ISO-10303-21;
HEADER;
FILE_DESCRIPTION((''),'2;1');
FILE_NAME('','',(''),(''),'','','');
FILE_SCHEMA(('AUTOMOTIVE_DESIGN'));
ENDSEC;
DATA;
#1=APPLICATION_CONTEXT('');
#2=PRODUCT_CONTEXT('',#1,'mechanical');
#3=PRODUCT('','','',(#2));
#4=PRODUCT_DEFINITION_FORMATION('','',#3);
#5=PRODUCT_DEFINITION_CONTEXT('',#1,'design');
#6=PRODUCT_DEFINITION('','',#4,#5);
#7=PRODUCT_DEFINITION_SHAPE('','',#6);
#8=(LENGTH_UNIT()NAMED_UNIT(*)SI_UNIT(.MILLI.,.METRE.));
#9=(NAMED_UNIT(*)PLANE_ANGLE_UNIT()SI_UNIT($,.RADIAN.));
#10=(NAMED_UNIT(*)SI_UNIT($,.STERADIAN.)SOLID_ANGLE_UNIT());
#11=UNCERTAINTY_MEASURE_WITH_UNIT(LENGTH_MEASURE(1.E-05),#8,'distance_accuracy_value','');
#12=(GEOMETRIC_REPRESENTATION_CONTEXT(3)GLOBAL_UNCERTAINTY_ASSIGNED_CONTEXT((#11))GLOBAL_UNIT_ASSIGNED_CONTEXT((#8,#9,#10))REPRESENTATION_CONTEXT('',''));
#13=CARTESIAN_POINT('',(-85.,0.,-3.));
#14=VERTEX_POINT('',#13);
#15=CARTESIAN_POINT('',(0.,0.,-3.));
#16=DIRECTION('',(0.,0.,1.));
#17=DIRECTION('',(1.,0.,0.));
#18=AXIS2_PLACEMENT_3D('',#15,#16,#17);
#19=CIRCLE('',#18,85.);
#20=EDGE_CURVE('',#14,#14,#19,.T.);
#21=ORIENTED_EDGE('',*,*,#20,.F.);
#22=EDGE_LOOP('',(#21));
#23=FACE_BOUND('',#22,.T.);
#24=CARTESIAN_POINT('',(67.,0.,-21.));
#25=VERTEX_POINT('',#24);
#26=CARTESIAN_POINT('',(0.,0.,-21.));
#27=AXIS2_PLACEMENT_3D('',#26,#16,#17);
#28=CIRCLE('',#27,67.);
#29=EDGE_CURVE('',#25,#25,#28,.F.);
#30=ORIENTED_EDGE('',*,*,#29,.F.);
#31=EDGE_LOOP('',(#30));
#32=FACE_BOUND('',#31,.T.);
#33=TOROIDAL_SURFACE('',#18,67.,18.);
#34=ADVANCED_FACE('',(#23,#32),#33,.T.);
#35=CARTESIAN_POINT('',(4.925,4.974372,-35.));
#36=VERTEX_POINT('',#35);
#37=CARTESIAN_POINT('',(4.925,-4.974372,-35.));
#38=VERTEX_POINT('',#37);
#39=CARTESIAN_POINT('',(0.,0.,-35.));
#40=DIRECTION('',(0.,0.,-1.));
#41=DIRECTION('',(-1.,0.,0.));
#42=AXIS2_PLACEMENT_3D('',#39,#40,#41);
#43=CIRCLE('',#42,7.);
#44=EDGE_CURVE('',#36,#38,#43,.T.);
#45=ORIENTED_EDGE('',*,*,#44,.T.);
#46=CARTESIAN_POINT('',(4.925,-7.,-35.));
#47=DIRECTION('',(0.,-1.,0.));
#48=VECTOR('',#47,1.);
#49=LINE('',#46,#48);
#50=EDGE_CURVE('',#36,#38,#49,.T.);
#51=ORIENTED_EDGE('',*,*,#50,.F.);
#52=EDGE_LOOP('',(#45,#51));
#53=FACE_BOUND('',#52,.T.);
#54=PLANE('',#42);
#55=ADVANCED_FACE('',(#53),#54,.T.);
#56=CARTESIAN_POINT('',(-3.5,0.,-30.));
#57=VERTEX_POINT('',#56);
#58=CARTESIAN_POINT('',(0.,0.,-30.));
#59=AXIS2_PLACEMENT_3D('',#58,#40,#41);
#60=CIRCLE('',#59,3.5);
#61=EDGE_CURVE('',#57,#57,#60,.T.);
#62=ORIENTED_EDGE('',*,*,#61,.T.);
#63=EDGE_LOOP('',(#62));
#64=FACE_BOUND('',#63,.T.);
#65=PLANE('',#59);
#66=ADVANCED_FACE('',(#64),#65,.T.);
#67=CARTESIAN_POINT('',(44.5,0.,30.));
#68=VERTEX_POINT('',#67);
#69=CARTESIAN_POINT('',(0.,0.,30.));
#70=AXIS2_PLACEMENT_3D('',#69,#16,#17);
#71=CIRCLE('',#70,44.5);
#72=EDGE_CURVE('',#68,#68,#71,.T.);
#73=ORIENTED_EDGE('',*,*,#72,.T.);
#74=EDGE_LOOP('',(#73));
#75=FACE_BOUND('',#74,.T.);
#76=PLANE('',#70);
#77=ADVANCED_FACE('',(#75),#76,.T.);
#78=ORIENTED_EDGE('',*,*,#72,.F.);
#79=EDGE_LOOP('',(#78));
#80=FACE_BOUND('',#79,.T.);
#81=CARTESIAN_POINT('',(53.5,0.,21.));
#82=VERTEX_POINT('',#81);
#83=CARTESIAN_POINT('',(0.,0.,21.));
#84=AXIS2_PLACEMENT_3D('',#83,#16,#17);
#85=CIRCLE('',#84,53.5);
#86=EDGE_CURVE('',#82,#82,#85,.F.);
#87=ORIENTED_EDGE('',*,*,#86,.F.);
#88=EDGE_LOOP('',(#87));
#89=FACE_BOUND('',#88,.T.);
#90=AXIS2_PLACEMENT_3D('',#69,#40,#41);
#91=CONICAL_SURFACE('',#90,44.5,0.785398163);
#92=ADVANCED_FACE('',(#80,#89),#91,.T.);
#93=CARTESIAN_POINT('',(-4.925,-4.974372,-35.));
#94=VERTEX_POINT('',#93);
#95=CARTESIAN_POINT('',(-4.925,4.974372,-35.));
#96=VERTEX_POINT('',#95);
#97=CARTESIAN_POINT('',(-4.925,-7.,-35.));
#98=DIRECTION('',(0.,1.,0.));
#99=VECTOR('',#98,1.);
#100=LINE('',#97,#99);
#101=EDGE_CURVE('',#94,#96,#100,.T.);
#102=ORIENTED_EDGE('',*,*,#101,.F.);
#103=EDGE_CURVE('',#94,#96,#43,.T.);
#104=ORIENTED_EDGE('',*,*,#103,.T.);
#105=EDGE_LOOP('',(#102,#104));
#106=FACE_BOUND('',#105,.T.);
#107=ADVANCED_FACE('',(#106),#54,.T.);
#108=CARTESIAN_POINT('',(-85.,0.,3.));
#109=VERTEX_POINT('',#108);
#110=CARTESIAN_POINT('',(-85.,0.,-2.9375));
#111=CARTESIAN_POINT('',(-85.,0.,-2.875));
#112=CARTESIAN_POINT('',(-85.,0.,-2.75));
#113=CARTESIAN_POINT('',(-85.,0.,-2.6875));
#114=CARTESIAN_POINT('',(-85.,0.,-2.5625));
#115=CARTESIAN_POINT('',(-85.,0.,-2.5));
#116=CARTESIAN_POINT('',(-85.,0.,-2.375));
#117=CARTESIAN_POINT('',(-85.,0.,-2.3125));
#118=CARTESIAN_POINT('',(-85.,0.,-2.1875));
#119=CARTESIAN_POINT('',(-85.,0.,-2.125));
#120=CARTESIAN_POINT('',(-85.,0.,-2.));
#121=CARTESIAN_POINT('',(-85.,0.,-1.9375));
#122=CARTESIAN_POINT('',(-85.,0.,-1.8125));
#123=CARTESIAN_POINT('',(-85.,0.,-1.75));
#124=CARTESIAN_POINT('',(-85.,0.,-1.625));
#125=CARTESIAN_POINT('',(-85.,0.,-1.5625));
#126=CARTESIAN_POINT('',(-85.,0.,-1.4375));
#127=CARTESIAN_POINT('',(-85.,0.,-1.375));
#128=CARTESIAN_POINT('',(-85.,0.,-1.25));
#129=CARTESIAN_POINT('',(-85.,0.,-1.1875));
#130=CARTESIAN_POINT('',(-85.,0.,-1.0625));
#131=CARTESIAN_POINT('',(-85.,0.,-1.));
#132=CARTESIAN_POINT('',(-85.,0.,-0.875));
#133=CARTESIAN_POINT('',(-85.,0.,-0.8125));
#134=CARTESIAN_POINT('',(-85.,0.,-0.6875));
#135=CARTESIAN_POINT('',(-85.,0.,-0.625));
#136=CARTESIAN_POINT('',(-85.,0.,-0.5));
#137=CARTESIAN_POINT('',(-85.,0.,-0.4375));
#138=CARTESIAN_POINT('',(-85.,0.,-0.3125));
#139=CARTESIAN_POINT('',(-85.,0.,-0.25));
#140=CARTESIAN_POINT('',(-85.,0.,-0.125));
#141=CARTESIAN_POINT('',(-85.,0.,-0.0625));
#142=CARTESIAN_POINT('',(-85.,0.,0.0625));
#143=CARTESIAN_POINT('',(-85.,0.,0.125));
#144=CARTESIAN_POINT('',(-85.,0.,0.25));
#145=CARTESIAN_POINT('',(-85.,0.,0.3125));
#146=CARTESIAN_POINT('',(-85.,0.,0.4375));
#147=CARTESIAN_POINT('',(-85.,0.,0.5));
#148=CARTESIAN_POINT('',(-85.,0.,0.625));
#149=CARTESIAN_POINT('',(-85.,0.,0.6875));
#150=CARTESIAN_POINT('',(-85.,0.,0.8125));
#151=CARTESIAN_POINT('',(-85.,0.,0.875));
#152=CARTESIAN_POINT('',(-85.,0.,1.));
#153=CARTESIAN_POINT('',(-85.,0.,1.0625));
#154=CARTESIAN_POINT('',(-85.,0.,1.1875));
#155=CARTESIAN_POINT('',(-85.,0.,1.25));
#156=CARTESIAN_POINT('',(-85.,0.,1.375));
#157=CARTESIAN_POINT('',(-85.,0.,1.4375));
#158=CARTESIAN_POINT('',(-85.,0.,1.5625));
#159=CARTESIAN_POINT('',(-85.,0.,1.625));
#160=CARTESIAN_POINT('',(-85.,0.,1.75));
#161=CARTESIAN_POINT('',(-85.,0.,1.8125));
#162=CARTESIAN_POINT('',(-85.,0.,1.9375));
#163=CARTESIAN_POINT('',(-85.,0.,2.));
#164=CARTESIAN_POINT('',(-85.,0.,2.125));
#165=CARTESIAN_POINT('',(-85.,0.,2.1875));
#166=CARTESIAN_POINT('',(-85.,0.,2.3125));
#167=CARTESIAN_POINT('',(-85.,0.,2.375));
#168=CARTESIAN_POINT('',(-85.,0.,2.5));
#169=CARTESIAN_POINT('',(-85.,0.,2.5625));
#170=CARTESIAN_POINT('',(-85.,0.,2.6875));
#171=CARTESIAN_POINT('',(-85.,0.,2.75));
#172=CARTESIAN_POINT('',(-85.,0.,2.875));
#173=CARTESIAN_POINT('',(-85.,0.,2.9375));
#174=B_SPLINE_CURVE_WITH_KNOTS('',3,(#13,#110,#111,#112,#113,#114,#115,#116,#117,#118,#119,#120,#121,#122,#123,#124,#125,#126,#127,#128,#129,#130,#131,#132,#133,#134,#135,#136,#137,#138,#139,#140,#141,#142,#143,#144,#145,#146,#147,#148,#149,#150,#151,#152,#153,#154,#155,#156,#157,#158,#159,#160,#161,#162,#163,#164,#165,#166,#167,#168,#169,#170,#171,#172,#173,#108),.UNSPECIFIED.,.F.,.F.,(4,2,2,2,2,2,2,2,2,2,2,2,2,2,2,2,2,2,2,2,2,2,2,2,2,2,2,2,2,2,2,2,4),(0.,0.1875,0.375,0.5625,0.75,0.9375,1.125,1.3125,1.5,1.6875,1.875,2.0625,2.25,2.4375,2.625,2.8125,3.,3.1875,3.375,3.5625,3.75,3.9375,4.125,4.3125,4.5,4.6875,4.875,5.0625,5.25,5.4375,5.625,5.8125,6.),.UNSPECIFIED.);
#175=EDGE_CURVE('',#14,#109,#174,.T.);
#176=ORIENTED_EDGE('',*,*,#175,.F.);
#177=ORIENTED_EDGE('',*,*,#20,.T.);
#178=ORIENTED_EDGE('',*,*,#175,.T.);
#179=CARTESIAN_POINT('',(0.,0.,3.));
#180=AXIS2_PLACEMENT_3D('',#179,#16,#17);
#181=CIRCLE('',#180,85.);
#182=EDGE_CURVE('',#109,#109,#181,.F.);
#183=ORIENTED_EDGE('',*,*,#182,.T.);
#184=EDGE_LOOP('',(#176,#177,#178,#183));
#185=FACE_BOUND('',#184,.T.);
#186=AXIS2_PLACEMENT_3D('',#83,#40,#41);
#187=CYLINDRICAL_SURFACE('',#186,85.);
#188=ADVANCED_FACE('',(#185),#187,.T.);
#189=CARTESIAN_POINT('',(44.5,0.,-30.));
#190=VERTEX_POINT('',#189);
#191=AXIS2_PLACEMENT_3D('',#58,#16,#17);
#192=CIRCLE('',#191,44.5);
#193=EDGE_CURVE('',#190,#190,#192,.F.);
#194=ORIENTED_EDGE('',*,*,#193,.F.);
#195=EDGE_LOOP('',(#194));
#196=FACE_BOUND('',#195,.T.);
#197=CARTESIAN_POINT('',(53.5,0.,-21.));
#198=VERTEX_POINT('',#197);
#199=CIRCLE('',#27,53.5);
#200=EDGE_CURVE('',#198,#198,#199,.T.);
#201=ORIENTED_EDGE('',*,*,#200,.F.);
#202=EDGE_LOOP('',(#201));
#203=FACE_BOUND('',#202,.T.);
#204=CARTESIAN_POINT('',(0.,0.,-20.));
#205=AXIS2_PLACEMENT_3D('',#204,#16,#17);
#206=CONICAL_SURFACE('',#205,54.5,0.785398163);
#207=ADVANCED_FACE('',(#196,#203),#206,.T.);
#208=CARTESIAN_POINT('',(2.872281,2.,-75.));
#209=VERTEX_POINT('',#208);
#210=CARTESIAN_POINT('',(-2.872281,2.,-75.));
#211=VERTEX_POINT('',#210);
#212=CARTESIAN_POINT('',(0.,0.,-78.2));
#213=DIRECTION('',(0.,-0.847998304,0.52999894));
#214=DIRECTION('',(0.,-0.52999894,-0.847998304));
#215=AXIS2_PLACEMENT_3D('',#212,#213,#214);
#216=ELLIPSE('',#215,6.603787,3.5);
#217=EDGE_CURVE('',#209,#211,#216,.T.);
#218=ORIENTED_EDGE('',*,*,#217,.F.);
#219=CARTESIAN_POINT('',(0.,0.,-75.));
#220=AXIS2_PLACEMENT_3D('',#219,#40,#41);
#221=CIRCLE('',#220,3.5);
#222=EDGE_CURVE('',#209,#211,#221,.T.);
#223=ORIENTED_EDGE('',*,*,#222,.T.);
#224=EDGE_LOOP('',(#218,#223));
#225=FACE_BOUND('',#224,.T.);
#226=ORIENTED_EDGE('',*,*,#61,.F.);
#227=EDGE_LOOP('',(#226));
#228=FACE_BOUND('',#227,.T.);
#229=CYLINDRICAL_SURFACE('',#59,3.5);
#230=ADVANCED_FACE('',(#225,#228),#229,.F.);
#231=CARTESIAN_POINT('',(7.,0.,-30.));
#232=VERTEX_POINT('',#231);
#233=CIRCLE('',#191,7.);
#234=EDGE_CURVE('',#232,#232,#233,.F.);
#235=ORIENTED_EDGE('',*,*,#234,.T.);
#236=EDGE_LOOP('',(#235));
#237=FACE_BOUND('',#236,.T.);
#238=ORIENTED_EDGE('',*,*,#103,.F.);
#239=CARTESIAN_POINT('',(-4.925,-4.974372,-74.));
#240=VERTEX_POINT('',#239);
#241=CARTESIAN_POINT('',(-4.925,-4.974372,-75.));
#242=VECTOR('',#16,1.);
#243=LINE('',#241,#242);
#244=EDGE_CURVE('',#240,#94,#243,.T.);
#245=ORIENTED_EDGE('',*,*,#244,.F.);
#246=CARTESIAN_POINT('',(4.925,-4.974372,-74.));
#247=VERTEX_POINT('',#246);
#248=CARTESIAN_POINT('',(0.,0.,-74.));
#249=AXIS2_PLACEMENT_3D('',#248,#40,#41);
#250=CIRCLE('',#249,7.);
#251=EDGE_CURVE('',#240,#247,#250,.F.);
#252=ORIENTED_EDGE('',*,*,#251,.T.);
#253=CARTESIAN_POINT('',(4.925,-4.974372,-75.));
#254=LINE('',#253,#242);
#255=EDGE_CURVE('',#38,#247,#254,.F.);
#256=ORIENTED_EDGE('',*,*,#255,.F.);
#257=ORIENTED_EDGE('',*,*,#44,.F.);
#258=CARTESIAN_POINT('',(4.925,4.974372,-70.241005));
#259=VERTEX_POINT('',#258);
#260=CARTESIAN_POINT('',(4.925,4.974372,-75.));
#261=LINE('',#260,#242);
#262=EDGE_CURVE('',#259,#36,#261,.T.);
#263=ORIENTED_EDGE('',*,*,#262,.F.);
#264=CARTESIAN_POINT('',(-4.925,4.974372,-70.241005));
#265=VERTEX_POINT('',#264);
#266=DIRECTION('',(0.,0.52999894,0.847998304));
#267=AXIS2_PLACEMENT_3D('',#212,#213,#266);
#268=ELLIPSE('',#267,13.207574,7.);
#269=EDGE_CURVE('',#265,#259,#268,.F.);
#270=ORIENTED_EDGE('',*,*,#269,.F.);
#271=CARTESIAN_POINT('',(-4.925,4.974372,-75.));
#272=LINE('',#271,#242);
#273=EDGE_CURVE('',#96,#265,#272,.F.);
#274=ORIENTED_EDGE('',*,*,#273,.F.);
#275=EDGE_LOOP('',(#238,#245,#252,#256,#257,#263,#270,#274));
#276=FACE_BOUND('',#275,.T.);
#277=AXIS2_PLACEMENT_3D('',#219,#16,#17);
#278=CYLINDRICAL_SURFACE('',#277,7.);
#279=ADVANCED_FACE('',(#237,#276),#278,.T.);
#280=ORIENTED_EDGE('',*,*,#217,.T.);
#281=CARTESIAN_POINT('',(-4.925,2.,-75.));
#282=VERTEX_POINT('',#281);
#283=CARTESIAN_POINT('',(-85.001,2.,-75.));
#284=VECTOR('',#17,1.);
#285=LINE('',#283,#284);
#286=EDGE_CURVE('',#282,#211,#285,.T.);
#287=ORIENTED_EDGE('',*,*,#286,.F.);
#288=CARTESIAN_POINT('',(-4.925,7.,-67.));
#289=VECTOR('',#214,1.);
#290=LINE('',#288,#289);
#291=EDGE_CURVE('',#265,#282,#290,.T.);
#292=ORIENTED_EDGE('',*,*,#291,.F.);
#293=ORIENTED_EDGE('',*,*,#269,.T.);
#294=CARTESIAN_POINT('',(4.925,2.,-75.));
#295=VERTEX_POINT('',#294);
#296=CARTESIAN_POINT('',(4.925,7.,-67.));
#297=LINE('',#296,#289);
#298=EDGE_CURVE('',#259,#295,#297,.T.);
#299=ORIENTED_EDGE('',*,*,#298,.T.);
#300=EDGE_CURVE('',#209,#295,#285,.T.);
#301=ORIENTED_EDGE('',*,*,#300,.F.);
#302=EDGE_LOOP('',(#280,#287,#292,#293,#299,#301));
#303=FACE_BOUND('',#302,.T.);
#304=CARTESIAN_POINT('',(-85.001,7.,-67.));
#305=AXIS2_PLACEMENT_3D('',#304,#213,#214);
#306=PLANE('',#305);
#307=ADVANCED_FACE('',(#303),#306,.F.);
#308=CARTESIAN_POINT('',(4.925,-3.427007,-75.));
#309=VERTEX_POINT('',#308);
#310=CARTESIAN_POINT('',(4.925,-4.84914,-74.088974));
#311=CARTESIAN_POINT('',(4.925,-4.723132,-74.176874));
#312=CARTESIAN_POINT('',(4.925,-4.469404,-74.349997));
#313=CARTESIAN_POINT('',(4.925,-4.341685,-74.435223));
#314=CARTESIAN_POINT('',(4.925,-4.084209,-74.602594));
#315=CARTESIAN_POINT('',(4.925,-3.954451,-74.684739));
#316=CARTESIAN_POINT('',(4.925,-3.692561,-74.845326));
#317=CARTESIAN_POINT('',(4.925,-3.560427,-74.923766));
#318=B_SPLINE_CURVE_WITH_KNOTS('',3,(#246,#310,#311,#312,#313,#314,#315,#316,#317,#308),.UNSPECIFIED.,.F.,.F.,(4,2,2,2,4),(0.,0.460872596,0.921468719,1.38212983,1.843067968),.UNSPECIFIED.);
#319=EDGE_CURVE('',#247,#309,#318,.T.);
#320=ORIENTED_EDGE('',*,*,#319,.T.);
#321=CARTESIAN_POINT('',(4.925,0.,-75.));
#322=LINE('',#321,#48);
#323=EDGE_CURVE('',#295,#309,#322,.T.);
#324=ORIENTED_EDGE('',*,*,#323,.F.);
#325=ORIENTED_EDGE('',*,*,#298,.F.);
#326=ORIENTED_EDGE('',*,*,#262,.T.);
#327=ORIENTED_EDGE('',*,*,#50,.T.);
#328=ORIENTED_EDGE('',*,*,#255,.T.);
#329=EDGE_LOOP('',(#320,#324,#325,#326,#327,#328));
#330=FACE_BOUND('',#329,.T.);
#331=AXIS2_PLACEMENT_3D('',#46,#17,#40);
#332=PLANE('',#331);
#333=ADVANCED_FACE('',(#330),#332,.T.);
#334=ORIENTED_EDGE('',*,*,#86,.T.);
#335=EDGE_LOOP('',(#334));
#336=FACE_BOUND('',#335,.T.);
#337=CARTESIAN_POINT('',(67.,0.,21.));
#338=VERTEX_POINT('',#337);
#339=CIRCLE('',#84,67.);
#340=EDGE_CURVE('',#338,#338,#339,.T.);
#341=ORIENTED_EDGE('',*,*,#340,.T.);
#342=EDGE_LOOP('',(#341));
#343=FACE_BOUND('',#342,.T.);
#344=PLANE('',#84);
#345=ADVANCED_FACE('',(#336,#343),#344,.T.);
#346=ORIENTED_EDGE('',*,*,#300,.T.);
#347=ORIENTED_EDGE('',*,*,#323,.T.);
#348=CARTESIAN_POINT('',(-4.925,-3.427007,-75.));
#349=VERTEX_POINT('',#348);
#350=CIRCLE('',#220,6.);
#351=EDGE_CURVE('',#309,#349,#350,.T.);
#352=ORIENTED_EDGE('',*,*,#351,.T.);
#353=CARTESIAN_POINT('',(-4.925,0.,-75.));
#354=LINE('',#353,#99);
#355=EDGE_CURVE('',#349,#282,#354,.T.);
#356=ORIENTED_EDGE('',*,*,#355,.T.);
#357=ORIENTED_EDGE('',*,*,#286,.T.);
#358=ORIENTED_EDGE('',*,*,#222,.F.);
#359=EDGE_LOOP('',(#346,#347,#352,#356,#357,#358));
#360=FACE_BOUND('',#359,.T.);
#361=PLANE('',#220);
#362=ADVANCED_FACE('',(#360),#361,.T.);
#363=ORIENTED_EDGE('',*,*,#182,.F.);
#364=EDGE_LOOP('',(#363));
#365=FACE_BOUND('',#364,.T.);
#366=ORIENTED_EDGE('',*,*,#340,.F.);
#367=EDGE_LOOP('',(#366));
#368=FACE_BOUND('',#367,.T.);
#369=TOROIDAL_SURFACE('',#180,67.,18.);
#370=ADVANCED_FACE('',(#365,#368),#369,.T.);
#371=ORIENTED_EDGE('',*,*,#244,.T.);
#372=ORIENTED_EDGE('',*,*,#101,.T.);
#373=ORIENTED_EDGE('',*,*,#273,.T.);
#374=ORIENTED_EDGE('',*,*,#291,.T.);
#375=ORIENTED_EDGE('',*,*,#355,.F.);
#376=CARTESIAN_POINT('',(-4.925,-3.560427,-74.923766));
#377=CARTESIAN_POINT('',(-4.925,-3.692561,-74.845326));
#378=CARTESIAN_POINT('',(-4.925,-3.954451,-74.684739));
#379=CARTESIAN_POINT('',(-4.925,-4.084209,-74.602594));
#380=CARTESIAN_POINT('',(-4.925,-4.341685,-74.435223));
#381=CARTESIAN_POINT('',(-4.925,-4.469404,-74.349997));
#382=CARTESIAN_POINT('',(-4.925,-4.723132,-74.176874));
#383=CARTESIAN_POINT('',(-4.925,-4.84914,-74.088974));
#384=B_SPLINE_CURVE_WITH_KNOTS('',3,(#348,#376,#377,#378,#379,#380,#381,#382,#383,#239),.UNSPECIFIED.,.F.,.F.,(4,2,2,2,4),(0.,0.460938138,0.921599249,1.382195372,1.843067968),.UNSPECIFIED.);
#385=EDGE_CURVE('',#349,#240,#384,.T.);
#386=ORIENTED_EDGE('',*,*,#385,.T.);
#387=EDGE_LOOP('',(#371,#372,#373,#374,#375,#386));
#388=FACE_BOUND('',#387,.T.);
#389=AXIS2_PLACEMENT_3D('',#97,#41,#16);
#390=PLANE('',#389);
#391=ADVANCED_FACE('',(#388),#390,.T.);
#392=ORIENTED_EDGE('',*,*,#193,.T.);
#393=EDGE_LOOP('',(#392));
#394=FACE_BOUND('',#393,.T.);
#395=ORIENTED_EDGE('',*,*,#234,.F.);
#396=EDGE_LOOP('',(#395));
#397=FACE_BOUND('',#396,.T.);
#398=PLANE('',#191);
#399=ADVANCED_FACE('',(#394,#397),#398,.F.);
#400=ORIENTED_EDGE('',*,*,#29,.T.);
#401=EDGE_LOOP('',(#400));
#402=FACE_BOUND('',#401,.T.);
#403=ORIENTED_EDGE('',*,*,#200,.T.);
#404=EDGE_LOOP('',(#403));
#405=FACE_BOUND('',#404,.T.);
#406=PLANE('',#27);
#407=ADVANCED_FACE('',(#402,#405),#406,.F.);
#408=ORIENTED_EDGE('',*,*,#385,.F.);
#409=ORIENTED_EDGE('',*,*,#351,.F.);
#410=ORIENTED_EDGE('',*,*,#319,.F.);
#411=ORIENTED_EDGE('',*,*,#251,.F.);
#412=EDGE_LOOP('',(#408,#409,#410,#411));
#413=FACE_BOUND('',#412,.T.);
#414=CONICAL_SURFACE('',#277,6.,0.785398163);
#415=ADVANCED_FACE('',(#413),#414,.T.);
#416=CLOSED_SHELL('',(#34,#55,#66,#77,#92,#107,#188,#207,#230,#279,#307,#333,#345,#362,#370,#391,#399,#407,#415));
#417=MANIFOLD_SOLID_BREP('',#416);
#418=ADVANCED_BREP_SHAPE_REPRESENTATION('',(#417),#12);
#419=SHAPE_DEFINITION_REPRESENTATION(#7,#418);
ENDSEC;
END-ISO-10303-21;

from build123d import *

# Parameters (mm, degrees)
SKETCH_1_R           = 85
EXTRUDE_1_DEPTH      = 21
SKETCH_2_R           = 54.5
EXTRUDE_2_DEPTH      = 30
CHAMFER_1_SIZE       = 10
SKETCH_3_R           = 7
EXTRUDE_3_DEPTH      = 45
SKETCH_5_OUTSIDE_W   = 224.47
SKETCH_5_OUTSIDE_H   = 224.47
SKETCH_5_OUTSIDE_W_2 = 9.85
SKETCH_5_OUTSIDE_H_2 = 14
CUT_EXTRUDE_1_DEPTH  = 40
CHAMFER_3_SIZE       = 1
SKETCH_7_R           = 3.5
CUT_EXTRUDE_2_DEPTH  = 45
FILLET_1_R           = 18
CUT_EXTRUDE_3_REACH  = 146.695


with BuildPart() as part:
    # 草图1 → 凸台-拉伸1 (new, symmetric)
    with BuildSketch(Plane.XY):
        with Locations(Location((0, 0, 0), (0, 0, 180))):
            Circle(SKETCH_1_R)
    extrude(amount=EXTRUDE_1_DEPTH, both=True)

    # 草图2 → 凸台-拉伸2 (add, symmetric)
    with BuildSketch(Plane.XY):
        Circle(SKETCH_2_R)
    extrude(amount=EXTRUDE_2_DEPTH, both=True)

    # 倒角1
    # the kernel refuses this chamfer: 10 mm, written as the material it takes off along each edge
    with BuildSketch(Plane(origin=(0, 0, -30), x_dir=(1, 0, 0), z_dir=(0, -1, 0))) as chamfer_1_piece_1_section:
        Polygon((54.5, CHAMFER_1_SIZE), (54.5 - CHAMFER_1_SIZE, 0), (54.5, 0), align=None)
    chamfer_1_piece_1 = revolve(axis=Axis((0, 0, -30), (0, 0, 1)), mode=Mode.PRIVATE)
    chamfer_1_piece_1 = split(chamfer_1_piece_1, bisect_by=Plane(origin=(-49.041649133, 0, -21), z_dir=(0, 0, -1)), keep=Keep.TOP, mode=Mode.PRIVATE)
    add(chamfer_1_piece_1, mode=Mode.SUBTRACT)
    with BuildSketch(Plane(origin=(0, 0, 30), x_dir=(1, 0, 0), z_dir=(0, -1, 0))) as chamfer_1_piece_2_section:
        Polygon((54.5, -CHAMFER_1_SIZE), (54.5 - CHAMFER_1_SIZE, 0), (54.5, 0), align=None)
    chamfer_1_piece_2 = revolve(axis=Axis((0, 0, 30), (0, 0, 1)), mode=Mode.PRIVATE)
    chamfer_1_piece_2 = split(chamfer_1_piece_2, bisect_by=Plane(origin=(-49.041649133, 0, 21), z_dir=(0, 0, 1)), keep=Keep.TOP, mode=Mode.PRIVATE)
    add(chamfer_1_piece_2, mode=Mode.SUBTRACT)

    # 草图3 → 凸台-拉伸3 (add)
    with BuildSketch(Plane(origin=(0, 0, -30), x_dir=(-1, 0, 0), z_dir=(0, 0, -1))):
        with Locations(Location((0, 0, 0), (0, 0, 180))):
            Circle(SKETCH_3_R)
    extrude(amount=EXTRUDE_3_DEPTH)

    # 草图5 outside → 切除-拉伸1 (cut)
    with BuildSketch(Plane(origin=(0, 0, -75), x_dir=(-1, 0, 0), z_dir=(0, 0, -1))):
        Rectangle(SKETCH_5_OUTSIDE_W, SKETCH_5_OUTSIDE_H)
        Rectangle(SKETCH_5_OUTSIDE_W_2, SKETCH_5_OUTSIDE_H_2, mode=Mode.SUBTRACT)
    extrude(amount=-CUT_EXTRUDE_1_DEPTH, mode=Mode.SUBTRACT)

    # 倒角3
    # the kernel refuses this chamfer: 1 mm, written as the material it takes off along each edge
    with BuildSketch(Plane(origin=(0, 0, -75), x_dir=(-0.9118755958915212, 0.4104666827130834, 0), z_dir=(-0.4104666827130834, -0.9118755958915212, 0))) as chamfer_3_piece_1:
        Polygon((7, -CHAMFER_3_SIZE), (7 - CHAMFER_3_SIZE, 0), (7, 0), align=None)
    revolve(axis=Axis((0, 0, -75), (0, 0, -1)), revolution_arc=65.76584555, mode=Mode.SUBTRACT)
    with BuildSketch(Plane(origin=(0, 0, -75), x_dir=(0.9118755958915, -0.41046668271313064, 0), z_dir=(0.41046668271313064, 0.9118755958915, 0))) as chamfer_3_piece_2:
        Polygon((7, -CHAMFER_3_SIZE), (7 - CHAMFER_3_SIZE, 0), (7, 0), align=None)
    revolve(axis=Axis((0, 0, -75), (0, 0, -1)), revolution_arc=65.76584555, mode=Mode.SUBTRACT)
    with BuildSketch(Plane(origin=(0, 0, -75), x_dir=(0, -1, 0), z_dir=(1, 0, 0))) as chamfer_3_piece_3:
        Polygon((7, -CHAMFER_3_SIZE), (7 - CHAMFER_3_SIZE, 0), (7, 0), align=None)
    revolve(axis=Axis((0, 0, -75), (0, 0, -1)), revolution_arc=65.76584555, mode=Mode.SUBTRACT)
    with BuildSketch(Plane(origin=(0, 0, -75), x_dir=(0, 1, 0), z_dir=(-1, 0, 0))) as chamfer_3_piece_4:
        Polygon((7, -CHAMFER_3_SIZE), (7 - CHAMFER_3_SIZE, 0), (7, 0), align=None)
    revolve(axis=Axis((0, 0, -75), (0, 0, -1)), revolution_arc=65.76584555, mode=Mode.SUBTRACT)

    # 草图7 → 切除-拉伸2 (cut)
    with BuildSketch(Plane(origin=(0, 0, -75), x_dir=(-1, 0, 0), z_dir=(0, 0, -1))):
        Circle(SKETCH_7_R)
    extrude(amount=-CUT_EXTRUDE_2_DEPTH, mode=Mode.SUBTRACT)

    # 圆角1
    fillet_1_edges = [part.edges().sort_by_distance(p)[0] for p in [
        (85, 0, -21),
        (85, 0, 21),
    ]]
    fillet(fillet_1_edges, radius=FILLET_1_R)

    # 草图8 → 切除-拉伸3 (cut, up to next)
    with BuildSketch(Plane(origin=(4.925, 0, 0), x_dir=(0, 0, -1), z_dir=(1, 0, 0)), mode=Mode.PRIVATE) as cut_extrude_3_sk1:
        Polygon((75, 2), (75, 7), (67, 7), align=None)
    cut_extrude_3_tool1 = extrude(cut_extrude_3_sk1.sketch, amount=-CUT_EXTRUDE_3_REACH, mode=Mode.PRIVATE) & part.part
    add(cut_extrude_3_tool1.solids().sort_by_distance((4.925, 5.333333, -72.333333))[0], mode=Mode.SUBTRACT)


solid = part.part
